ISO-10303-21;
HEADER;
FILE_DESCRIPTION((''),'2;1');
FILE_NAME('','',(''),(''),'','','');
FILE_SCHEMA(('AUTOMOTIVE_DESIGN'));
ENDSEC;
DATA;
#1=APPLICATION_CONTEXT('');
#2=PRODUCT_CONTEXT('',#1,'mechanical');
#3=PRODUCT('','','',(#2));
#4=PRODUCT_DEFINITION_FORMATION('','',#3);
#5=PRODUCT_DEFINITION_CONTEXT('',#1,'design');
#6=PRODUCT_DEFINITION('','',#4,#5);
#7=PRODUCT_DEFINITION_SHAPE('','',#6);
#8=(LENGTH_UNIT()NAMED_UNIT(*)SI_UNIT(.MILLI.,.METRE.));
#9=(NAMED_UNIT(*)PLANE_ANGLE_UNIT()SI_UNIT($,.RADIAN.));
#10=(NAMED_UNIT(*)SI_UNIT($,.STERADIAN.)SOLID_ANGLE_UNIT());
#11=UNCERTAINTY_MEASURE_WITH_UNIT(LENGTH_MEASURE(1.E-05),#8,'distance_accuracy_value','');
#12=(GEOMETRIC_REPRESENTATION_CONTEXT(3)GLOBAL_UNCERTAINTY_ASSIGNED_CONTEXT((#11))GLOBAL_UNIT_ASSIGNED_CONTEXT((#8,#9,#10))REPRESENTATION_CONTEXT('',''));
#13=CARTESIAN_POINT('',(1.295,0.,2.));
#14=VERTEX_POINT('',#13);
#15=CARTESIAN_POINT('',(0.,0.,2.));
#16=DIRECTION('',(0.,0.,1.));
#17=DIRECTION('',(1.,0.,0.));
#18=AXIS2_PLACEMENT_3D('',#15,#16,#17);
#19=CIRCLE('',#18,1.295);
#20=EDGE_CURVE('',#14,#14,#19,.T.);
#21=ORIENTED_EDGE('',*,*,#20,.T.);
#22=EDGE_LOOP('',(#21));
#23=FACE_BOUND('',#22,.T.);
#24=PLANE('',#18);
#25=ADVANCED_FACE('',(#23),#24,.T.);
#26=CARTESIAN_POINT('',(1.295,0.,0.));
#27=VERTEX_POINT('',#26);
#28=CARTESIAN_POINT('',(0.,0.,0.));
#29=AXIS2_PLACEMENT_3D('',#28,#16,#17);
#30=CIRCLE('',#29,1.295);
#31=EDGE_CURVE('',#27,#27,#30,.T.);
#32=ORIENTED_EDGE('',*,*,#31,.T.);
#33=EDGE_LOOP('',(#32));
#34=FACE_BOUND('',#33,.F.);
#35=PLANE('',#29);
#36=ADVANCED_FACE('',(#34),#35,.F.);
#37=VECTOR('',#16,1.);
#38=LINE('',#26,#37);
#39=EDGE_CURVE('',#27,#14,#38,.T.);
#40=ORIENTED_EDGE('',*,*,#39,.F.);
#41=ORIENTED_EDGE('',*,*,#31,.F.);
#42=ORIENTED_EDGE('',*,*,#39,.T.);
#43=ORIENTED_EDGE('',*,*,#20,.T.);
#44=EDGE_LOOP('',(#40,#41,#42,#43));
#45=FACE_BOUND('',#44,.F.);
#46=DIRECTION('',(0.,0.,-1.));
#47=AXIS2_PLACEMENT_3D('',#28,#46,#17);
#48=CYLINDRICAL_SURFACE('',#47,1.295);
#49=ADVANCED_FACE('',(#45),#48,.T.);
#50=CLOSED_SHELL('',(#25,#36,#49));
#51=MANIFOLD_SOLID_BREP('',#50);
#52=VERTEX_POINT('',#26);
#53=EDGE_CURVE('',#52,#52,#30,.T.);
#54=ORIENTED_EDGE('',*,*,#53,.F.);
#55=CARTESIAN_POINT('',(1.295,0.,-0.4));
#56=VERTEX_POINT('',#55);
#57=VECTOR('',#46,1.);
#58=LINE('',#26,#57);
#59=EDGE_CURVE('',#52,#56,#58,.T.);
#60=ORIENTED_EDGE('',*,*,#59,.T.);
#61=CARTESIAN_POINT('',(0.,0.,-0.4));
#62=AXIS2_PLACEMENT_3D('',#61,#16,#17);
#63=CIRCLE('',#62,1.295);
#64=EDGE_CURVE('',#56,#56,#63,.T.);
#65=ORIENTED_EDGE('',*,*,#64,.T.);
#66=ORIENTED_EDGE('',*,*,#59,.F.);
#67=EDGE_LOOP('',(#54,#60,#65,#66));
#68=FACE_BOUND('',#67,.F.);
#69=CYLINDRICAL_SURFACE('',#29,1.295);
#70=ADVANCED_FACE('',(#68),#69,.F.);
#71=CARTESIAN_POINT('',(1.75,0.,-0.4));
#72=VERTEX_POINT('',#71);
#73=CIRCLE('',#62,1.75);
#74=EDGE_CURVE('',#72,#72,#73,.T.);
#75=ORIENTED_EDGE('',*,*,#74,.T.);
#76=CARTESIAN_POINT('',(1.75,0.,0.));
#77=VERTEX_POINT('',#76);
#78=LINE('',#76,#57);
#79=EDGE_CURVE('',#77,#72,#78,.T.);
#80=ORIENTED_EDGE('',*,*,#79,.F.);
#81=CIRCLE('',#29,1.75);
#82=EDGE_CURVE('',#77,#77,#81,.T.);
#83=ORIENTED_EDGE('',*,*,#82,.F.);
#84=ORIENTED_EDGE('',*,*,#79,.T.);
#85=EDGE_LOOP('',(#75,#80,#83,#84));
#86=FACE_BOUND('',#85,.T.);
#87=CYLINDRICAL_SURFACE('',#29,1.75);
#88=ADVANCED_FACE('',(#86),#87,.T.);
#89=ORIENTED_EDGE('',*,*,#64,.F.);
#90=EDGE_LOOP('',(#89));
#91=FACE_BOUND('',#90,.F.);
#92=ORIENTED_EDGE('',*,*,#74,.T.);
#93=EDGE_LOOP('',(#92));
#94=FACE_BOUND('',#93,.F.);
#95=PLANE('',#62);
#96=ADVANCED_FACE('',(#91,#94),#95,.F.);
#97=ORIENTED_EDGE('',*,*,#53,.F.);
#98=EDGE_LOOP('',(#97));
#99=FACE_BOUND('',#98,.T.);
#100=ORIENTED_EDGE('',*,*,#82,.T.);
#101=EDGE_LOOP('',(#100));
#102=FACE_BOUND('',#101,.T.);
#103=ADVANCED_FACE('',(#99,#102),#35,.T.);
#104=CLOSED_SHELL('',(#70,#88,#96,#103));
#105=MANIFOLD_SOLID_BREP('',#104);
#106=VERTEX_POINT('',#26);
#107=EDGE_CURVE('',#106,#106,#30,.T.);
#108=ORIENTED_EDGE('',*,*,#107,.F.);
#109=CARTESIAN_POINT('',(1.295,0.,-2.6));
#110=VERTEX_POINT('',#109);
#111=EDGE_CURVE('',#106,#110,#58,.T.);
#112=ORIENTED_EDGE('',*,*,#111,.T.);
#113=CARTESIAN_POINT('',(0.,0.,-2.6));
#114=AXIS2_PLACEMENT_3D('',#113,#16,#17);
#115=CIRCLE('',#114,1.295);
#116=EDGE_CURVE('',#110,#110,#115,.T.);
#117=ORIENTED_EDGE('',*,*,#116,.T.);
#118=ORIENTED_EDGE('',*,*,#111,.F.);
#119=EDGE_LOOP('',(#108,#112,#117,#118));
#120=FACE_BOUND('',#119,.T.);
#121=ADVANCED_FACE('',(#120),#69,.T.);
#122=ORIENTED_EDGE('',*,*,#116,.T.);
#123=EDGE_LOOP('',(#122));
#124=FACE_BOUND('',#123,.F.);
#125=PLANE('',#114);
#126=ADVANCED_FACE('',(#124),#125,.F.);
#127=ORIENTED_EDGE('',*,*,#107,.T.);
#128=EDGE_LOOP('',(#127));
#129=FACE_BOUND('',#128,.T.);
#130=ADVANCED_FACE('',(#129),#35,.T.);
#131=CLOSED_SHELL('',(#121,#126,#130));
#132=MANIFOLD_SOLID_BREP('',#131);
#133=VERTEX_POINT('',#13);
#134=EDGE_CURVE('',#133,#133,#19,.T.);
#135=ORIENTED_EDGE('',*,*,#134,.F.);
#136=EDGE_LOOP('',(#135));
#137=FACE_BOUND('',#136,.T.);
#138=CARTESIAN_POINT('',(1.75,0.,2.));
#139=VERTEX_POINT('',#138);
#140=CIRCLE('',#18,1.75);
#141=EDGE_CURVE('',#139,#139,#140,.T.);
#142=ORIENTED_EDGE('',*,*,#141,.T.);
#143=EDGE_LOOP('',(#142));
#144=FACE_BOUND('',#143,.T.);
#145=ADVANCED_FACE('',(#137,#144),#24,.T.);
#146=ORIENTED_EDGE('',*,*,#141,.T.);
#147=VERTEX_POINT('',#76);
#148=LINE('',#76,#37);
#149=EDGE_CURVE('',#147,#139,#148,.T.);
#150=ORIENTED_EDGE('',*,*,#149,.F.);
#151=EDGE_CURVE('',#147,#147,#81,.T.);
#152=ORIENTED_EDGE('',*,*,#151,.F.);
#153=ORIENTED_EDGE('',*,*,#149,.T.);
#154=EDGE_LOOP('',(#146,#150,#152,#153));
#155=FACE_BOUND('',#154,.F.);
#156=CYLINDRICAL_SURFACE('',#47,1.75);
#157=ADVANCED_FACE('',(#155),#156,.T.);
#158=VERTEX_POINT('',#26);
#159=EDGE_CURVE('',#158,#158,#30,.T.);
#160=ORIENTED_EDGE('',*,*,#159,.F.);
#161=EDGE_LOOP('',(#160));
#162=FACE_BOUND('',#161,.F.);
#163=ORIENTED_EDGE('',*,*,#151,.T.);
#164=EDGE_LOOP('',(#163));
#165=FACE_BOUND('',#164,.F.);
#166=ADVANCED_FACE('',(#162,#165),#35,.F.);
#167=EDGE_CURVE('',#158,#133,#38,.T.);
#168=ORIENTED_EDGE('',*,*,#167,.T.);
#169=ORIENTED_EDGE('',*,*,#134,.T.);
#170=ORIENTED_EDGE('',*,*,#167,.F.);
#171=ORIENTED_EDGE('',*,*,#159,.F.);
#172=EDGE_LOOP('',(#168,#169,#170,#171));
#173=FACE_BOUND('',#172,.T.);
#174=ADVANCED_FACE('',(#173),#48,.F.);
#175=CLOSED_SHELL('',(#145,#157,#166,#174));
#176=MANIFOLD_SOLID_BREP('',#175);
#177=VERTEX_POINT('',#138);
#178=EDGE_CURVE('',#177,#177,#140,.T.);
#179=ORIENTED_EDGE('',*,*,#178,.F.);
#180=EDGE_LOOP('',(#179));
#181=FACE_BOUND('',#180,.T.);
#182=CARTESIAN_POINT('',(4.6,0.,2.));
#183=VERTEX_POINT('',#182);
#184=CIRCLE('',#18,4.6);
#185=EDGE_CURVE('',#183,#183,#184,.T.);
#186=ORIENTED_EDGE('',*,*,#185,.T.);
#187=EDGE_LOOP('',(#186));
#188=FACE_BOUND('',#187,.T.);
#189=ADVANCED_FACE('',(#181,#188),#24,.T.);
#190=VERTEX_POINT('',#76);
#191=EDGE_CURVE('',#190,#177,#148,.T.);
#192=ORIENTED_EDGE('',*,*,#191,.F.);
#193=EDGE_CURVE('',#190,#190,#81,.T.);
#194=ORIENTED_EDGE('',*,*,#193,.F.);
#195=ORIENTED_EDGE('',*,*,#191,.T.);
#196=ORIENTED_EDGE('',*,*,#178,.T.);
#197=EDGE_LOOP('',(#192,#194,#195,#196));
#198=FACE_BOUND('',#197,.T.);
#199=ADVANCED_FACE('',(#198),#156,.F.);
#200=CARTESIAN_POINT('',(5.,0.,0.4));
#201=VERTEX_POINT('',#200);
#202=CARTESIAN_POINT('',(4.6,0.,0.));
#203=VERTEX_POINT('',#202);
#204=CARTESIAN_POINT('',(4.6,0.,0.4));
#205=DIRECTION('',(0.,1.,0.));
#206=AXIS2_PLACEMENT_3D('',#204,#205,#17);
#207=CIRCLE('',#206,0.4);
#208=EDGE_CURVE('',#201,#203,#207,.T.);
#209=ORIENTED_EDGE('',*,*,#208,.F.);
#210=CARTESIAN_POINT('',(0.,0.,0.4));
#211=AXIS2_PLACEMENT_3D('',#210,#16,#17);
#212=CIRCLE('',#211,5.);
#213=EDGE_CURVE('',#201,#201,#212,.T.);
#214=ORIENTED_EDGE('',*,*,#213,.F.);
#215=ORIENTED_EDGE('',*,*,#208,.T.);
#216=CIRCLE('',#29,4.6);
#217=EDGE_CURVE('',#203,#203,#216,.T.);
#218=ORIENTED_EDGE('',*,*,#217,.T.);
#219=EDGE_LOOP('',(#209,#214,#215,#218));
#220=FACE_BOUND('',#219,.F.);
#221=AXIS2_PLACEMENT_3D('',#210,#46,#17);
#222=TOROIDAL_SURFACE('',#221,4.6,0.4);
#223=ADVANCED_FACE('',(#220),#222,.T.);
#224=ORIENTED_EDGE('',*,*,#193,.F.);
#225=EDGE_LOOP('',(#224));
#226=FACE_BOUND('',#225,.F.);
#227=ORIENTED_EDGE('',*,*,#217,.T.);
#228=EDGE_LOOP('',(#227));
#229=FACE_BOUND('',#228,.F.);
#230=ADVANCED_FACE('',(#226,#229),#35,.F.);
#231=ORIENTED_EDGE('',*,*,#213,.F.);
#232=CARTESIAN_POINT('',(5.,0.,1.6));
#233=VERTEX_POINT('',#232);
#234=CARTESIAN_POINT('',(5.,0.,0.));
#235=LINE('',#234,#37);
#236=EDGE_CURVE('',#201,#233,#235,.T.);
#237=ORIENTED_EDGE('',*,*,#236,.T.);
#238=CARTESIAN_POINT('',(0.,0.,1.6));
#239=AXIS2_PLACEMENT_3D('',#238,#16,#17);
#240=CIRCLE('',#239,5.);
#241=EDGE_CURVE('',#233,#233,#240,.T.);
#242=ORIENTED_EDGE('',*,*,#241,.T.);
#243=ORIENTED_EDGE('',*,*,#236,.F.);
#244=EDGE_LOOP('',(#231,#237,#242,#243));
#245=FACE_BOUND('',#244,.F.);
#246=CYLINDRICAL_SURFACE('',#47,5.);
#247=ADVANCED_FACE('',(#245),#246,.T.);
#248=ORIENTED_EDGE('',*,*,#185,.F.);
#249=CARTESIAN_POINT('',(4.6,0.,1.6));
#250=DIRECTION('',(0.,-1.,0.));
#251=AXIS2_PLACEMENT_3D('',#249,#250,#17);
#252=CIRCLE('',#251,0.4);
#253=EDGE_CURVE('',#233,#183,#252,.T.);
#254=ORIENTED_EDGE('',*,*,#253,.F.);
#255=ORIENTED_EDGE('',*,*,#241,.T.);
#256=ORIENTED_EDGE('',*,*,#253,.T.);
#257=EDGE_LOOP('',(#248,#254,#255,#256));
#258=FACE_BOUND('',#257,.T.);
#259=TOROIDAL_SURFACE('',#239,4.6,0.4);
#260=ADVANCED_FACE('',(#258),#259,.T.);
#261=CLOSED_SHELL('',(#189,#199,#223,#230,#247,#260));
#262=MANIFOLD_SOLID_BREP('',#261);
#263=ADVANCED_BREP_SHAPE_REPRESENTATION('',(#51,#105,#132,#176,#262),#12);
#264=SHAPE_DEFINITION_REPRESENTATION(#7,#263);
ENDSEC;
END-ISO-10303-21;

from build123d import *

# Parameters (mm, degrees)
F0_R     = 5
F0_R_2   = 1.75
F1_DEPTH = 2
F0_R_3   = 1.295
F3_DEPTH = 2
F4_DEPTH = 0.4
F5_DEPTH = 2
F6_R     = 0.4
F7_DEPTH = 2.6


# Not quite as in the source:
# - the program builds the solid bodies; features that only make, move or delete a surface that nothing else refers to are left out


with BuildPart() as f1:
    # F0 (on Top) → F1 (new body)
    with BuildSketch(Plane.XY):
        Circle(F0_R)
        Circle(F0_R_2, mode=Mode.SUBTRACT)
    extrude(amount=F1_DEPTH)

    # F6
    f6_edges = [f1.edges().sort_by_distance(p)[0] for p in [
        (-5, 0, 2),
        (-5, 0, 0),
    ]]
    fillet(f6_edges, radius=F6_R)


with BuildPart() as f3:
    # F0 (on Top) → F3 (new body)
    with BuildSketch(Plane.XY):
        Circle(F0_R_3)
    extrude(amount=F3_DEPTH)


with BuildPart() as f4:
    # F0 (on Top) → F4 (new body)
    with BuildSketch(Plane.XY):
        Circle(F0_R_2)
        Circle(F0_R_3, mode=Mode.SUBTRACT)
    extrude(amount=-F4_DEPTH)


with BuildPart() as f5:
    # F0 (on Top) → F5 (new body)
    with BuildSketch(Plane.XY):
        Circle(F0_R_2)
        Circle(F0_R_3, mode=Mode.SUBTRACT)
    extrude(amount=F5_DEPTH)


with BuildPart() as f7:
    # F7 (new): a face of the model
    f7_faces = [f3.part.faces().sort_by_distance(p)[0] for p in [
        (0, 0, 0),
    ]]
    extrude(f7_faces, amount=F7_DEPTH)


solid = Compound([f1.part, f3.part, f4.part, f5.part, f7.part])
